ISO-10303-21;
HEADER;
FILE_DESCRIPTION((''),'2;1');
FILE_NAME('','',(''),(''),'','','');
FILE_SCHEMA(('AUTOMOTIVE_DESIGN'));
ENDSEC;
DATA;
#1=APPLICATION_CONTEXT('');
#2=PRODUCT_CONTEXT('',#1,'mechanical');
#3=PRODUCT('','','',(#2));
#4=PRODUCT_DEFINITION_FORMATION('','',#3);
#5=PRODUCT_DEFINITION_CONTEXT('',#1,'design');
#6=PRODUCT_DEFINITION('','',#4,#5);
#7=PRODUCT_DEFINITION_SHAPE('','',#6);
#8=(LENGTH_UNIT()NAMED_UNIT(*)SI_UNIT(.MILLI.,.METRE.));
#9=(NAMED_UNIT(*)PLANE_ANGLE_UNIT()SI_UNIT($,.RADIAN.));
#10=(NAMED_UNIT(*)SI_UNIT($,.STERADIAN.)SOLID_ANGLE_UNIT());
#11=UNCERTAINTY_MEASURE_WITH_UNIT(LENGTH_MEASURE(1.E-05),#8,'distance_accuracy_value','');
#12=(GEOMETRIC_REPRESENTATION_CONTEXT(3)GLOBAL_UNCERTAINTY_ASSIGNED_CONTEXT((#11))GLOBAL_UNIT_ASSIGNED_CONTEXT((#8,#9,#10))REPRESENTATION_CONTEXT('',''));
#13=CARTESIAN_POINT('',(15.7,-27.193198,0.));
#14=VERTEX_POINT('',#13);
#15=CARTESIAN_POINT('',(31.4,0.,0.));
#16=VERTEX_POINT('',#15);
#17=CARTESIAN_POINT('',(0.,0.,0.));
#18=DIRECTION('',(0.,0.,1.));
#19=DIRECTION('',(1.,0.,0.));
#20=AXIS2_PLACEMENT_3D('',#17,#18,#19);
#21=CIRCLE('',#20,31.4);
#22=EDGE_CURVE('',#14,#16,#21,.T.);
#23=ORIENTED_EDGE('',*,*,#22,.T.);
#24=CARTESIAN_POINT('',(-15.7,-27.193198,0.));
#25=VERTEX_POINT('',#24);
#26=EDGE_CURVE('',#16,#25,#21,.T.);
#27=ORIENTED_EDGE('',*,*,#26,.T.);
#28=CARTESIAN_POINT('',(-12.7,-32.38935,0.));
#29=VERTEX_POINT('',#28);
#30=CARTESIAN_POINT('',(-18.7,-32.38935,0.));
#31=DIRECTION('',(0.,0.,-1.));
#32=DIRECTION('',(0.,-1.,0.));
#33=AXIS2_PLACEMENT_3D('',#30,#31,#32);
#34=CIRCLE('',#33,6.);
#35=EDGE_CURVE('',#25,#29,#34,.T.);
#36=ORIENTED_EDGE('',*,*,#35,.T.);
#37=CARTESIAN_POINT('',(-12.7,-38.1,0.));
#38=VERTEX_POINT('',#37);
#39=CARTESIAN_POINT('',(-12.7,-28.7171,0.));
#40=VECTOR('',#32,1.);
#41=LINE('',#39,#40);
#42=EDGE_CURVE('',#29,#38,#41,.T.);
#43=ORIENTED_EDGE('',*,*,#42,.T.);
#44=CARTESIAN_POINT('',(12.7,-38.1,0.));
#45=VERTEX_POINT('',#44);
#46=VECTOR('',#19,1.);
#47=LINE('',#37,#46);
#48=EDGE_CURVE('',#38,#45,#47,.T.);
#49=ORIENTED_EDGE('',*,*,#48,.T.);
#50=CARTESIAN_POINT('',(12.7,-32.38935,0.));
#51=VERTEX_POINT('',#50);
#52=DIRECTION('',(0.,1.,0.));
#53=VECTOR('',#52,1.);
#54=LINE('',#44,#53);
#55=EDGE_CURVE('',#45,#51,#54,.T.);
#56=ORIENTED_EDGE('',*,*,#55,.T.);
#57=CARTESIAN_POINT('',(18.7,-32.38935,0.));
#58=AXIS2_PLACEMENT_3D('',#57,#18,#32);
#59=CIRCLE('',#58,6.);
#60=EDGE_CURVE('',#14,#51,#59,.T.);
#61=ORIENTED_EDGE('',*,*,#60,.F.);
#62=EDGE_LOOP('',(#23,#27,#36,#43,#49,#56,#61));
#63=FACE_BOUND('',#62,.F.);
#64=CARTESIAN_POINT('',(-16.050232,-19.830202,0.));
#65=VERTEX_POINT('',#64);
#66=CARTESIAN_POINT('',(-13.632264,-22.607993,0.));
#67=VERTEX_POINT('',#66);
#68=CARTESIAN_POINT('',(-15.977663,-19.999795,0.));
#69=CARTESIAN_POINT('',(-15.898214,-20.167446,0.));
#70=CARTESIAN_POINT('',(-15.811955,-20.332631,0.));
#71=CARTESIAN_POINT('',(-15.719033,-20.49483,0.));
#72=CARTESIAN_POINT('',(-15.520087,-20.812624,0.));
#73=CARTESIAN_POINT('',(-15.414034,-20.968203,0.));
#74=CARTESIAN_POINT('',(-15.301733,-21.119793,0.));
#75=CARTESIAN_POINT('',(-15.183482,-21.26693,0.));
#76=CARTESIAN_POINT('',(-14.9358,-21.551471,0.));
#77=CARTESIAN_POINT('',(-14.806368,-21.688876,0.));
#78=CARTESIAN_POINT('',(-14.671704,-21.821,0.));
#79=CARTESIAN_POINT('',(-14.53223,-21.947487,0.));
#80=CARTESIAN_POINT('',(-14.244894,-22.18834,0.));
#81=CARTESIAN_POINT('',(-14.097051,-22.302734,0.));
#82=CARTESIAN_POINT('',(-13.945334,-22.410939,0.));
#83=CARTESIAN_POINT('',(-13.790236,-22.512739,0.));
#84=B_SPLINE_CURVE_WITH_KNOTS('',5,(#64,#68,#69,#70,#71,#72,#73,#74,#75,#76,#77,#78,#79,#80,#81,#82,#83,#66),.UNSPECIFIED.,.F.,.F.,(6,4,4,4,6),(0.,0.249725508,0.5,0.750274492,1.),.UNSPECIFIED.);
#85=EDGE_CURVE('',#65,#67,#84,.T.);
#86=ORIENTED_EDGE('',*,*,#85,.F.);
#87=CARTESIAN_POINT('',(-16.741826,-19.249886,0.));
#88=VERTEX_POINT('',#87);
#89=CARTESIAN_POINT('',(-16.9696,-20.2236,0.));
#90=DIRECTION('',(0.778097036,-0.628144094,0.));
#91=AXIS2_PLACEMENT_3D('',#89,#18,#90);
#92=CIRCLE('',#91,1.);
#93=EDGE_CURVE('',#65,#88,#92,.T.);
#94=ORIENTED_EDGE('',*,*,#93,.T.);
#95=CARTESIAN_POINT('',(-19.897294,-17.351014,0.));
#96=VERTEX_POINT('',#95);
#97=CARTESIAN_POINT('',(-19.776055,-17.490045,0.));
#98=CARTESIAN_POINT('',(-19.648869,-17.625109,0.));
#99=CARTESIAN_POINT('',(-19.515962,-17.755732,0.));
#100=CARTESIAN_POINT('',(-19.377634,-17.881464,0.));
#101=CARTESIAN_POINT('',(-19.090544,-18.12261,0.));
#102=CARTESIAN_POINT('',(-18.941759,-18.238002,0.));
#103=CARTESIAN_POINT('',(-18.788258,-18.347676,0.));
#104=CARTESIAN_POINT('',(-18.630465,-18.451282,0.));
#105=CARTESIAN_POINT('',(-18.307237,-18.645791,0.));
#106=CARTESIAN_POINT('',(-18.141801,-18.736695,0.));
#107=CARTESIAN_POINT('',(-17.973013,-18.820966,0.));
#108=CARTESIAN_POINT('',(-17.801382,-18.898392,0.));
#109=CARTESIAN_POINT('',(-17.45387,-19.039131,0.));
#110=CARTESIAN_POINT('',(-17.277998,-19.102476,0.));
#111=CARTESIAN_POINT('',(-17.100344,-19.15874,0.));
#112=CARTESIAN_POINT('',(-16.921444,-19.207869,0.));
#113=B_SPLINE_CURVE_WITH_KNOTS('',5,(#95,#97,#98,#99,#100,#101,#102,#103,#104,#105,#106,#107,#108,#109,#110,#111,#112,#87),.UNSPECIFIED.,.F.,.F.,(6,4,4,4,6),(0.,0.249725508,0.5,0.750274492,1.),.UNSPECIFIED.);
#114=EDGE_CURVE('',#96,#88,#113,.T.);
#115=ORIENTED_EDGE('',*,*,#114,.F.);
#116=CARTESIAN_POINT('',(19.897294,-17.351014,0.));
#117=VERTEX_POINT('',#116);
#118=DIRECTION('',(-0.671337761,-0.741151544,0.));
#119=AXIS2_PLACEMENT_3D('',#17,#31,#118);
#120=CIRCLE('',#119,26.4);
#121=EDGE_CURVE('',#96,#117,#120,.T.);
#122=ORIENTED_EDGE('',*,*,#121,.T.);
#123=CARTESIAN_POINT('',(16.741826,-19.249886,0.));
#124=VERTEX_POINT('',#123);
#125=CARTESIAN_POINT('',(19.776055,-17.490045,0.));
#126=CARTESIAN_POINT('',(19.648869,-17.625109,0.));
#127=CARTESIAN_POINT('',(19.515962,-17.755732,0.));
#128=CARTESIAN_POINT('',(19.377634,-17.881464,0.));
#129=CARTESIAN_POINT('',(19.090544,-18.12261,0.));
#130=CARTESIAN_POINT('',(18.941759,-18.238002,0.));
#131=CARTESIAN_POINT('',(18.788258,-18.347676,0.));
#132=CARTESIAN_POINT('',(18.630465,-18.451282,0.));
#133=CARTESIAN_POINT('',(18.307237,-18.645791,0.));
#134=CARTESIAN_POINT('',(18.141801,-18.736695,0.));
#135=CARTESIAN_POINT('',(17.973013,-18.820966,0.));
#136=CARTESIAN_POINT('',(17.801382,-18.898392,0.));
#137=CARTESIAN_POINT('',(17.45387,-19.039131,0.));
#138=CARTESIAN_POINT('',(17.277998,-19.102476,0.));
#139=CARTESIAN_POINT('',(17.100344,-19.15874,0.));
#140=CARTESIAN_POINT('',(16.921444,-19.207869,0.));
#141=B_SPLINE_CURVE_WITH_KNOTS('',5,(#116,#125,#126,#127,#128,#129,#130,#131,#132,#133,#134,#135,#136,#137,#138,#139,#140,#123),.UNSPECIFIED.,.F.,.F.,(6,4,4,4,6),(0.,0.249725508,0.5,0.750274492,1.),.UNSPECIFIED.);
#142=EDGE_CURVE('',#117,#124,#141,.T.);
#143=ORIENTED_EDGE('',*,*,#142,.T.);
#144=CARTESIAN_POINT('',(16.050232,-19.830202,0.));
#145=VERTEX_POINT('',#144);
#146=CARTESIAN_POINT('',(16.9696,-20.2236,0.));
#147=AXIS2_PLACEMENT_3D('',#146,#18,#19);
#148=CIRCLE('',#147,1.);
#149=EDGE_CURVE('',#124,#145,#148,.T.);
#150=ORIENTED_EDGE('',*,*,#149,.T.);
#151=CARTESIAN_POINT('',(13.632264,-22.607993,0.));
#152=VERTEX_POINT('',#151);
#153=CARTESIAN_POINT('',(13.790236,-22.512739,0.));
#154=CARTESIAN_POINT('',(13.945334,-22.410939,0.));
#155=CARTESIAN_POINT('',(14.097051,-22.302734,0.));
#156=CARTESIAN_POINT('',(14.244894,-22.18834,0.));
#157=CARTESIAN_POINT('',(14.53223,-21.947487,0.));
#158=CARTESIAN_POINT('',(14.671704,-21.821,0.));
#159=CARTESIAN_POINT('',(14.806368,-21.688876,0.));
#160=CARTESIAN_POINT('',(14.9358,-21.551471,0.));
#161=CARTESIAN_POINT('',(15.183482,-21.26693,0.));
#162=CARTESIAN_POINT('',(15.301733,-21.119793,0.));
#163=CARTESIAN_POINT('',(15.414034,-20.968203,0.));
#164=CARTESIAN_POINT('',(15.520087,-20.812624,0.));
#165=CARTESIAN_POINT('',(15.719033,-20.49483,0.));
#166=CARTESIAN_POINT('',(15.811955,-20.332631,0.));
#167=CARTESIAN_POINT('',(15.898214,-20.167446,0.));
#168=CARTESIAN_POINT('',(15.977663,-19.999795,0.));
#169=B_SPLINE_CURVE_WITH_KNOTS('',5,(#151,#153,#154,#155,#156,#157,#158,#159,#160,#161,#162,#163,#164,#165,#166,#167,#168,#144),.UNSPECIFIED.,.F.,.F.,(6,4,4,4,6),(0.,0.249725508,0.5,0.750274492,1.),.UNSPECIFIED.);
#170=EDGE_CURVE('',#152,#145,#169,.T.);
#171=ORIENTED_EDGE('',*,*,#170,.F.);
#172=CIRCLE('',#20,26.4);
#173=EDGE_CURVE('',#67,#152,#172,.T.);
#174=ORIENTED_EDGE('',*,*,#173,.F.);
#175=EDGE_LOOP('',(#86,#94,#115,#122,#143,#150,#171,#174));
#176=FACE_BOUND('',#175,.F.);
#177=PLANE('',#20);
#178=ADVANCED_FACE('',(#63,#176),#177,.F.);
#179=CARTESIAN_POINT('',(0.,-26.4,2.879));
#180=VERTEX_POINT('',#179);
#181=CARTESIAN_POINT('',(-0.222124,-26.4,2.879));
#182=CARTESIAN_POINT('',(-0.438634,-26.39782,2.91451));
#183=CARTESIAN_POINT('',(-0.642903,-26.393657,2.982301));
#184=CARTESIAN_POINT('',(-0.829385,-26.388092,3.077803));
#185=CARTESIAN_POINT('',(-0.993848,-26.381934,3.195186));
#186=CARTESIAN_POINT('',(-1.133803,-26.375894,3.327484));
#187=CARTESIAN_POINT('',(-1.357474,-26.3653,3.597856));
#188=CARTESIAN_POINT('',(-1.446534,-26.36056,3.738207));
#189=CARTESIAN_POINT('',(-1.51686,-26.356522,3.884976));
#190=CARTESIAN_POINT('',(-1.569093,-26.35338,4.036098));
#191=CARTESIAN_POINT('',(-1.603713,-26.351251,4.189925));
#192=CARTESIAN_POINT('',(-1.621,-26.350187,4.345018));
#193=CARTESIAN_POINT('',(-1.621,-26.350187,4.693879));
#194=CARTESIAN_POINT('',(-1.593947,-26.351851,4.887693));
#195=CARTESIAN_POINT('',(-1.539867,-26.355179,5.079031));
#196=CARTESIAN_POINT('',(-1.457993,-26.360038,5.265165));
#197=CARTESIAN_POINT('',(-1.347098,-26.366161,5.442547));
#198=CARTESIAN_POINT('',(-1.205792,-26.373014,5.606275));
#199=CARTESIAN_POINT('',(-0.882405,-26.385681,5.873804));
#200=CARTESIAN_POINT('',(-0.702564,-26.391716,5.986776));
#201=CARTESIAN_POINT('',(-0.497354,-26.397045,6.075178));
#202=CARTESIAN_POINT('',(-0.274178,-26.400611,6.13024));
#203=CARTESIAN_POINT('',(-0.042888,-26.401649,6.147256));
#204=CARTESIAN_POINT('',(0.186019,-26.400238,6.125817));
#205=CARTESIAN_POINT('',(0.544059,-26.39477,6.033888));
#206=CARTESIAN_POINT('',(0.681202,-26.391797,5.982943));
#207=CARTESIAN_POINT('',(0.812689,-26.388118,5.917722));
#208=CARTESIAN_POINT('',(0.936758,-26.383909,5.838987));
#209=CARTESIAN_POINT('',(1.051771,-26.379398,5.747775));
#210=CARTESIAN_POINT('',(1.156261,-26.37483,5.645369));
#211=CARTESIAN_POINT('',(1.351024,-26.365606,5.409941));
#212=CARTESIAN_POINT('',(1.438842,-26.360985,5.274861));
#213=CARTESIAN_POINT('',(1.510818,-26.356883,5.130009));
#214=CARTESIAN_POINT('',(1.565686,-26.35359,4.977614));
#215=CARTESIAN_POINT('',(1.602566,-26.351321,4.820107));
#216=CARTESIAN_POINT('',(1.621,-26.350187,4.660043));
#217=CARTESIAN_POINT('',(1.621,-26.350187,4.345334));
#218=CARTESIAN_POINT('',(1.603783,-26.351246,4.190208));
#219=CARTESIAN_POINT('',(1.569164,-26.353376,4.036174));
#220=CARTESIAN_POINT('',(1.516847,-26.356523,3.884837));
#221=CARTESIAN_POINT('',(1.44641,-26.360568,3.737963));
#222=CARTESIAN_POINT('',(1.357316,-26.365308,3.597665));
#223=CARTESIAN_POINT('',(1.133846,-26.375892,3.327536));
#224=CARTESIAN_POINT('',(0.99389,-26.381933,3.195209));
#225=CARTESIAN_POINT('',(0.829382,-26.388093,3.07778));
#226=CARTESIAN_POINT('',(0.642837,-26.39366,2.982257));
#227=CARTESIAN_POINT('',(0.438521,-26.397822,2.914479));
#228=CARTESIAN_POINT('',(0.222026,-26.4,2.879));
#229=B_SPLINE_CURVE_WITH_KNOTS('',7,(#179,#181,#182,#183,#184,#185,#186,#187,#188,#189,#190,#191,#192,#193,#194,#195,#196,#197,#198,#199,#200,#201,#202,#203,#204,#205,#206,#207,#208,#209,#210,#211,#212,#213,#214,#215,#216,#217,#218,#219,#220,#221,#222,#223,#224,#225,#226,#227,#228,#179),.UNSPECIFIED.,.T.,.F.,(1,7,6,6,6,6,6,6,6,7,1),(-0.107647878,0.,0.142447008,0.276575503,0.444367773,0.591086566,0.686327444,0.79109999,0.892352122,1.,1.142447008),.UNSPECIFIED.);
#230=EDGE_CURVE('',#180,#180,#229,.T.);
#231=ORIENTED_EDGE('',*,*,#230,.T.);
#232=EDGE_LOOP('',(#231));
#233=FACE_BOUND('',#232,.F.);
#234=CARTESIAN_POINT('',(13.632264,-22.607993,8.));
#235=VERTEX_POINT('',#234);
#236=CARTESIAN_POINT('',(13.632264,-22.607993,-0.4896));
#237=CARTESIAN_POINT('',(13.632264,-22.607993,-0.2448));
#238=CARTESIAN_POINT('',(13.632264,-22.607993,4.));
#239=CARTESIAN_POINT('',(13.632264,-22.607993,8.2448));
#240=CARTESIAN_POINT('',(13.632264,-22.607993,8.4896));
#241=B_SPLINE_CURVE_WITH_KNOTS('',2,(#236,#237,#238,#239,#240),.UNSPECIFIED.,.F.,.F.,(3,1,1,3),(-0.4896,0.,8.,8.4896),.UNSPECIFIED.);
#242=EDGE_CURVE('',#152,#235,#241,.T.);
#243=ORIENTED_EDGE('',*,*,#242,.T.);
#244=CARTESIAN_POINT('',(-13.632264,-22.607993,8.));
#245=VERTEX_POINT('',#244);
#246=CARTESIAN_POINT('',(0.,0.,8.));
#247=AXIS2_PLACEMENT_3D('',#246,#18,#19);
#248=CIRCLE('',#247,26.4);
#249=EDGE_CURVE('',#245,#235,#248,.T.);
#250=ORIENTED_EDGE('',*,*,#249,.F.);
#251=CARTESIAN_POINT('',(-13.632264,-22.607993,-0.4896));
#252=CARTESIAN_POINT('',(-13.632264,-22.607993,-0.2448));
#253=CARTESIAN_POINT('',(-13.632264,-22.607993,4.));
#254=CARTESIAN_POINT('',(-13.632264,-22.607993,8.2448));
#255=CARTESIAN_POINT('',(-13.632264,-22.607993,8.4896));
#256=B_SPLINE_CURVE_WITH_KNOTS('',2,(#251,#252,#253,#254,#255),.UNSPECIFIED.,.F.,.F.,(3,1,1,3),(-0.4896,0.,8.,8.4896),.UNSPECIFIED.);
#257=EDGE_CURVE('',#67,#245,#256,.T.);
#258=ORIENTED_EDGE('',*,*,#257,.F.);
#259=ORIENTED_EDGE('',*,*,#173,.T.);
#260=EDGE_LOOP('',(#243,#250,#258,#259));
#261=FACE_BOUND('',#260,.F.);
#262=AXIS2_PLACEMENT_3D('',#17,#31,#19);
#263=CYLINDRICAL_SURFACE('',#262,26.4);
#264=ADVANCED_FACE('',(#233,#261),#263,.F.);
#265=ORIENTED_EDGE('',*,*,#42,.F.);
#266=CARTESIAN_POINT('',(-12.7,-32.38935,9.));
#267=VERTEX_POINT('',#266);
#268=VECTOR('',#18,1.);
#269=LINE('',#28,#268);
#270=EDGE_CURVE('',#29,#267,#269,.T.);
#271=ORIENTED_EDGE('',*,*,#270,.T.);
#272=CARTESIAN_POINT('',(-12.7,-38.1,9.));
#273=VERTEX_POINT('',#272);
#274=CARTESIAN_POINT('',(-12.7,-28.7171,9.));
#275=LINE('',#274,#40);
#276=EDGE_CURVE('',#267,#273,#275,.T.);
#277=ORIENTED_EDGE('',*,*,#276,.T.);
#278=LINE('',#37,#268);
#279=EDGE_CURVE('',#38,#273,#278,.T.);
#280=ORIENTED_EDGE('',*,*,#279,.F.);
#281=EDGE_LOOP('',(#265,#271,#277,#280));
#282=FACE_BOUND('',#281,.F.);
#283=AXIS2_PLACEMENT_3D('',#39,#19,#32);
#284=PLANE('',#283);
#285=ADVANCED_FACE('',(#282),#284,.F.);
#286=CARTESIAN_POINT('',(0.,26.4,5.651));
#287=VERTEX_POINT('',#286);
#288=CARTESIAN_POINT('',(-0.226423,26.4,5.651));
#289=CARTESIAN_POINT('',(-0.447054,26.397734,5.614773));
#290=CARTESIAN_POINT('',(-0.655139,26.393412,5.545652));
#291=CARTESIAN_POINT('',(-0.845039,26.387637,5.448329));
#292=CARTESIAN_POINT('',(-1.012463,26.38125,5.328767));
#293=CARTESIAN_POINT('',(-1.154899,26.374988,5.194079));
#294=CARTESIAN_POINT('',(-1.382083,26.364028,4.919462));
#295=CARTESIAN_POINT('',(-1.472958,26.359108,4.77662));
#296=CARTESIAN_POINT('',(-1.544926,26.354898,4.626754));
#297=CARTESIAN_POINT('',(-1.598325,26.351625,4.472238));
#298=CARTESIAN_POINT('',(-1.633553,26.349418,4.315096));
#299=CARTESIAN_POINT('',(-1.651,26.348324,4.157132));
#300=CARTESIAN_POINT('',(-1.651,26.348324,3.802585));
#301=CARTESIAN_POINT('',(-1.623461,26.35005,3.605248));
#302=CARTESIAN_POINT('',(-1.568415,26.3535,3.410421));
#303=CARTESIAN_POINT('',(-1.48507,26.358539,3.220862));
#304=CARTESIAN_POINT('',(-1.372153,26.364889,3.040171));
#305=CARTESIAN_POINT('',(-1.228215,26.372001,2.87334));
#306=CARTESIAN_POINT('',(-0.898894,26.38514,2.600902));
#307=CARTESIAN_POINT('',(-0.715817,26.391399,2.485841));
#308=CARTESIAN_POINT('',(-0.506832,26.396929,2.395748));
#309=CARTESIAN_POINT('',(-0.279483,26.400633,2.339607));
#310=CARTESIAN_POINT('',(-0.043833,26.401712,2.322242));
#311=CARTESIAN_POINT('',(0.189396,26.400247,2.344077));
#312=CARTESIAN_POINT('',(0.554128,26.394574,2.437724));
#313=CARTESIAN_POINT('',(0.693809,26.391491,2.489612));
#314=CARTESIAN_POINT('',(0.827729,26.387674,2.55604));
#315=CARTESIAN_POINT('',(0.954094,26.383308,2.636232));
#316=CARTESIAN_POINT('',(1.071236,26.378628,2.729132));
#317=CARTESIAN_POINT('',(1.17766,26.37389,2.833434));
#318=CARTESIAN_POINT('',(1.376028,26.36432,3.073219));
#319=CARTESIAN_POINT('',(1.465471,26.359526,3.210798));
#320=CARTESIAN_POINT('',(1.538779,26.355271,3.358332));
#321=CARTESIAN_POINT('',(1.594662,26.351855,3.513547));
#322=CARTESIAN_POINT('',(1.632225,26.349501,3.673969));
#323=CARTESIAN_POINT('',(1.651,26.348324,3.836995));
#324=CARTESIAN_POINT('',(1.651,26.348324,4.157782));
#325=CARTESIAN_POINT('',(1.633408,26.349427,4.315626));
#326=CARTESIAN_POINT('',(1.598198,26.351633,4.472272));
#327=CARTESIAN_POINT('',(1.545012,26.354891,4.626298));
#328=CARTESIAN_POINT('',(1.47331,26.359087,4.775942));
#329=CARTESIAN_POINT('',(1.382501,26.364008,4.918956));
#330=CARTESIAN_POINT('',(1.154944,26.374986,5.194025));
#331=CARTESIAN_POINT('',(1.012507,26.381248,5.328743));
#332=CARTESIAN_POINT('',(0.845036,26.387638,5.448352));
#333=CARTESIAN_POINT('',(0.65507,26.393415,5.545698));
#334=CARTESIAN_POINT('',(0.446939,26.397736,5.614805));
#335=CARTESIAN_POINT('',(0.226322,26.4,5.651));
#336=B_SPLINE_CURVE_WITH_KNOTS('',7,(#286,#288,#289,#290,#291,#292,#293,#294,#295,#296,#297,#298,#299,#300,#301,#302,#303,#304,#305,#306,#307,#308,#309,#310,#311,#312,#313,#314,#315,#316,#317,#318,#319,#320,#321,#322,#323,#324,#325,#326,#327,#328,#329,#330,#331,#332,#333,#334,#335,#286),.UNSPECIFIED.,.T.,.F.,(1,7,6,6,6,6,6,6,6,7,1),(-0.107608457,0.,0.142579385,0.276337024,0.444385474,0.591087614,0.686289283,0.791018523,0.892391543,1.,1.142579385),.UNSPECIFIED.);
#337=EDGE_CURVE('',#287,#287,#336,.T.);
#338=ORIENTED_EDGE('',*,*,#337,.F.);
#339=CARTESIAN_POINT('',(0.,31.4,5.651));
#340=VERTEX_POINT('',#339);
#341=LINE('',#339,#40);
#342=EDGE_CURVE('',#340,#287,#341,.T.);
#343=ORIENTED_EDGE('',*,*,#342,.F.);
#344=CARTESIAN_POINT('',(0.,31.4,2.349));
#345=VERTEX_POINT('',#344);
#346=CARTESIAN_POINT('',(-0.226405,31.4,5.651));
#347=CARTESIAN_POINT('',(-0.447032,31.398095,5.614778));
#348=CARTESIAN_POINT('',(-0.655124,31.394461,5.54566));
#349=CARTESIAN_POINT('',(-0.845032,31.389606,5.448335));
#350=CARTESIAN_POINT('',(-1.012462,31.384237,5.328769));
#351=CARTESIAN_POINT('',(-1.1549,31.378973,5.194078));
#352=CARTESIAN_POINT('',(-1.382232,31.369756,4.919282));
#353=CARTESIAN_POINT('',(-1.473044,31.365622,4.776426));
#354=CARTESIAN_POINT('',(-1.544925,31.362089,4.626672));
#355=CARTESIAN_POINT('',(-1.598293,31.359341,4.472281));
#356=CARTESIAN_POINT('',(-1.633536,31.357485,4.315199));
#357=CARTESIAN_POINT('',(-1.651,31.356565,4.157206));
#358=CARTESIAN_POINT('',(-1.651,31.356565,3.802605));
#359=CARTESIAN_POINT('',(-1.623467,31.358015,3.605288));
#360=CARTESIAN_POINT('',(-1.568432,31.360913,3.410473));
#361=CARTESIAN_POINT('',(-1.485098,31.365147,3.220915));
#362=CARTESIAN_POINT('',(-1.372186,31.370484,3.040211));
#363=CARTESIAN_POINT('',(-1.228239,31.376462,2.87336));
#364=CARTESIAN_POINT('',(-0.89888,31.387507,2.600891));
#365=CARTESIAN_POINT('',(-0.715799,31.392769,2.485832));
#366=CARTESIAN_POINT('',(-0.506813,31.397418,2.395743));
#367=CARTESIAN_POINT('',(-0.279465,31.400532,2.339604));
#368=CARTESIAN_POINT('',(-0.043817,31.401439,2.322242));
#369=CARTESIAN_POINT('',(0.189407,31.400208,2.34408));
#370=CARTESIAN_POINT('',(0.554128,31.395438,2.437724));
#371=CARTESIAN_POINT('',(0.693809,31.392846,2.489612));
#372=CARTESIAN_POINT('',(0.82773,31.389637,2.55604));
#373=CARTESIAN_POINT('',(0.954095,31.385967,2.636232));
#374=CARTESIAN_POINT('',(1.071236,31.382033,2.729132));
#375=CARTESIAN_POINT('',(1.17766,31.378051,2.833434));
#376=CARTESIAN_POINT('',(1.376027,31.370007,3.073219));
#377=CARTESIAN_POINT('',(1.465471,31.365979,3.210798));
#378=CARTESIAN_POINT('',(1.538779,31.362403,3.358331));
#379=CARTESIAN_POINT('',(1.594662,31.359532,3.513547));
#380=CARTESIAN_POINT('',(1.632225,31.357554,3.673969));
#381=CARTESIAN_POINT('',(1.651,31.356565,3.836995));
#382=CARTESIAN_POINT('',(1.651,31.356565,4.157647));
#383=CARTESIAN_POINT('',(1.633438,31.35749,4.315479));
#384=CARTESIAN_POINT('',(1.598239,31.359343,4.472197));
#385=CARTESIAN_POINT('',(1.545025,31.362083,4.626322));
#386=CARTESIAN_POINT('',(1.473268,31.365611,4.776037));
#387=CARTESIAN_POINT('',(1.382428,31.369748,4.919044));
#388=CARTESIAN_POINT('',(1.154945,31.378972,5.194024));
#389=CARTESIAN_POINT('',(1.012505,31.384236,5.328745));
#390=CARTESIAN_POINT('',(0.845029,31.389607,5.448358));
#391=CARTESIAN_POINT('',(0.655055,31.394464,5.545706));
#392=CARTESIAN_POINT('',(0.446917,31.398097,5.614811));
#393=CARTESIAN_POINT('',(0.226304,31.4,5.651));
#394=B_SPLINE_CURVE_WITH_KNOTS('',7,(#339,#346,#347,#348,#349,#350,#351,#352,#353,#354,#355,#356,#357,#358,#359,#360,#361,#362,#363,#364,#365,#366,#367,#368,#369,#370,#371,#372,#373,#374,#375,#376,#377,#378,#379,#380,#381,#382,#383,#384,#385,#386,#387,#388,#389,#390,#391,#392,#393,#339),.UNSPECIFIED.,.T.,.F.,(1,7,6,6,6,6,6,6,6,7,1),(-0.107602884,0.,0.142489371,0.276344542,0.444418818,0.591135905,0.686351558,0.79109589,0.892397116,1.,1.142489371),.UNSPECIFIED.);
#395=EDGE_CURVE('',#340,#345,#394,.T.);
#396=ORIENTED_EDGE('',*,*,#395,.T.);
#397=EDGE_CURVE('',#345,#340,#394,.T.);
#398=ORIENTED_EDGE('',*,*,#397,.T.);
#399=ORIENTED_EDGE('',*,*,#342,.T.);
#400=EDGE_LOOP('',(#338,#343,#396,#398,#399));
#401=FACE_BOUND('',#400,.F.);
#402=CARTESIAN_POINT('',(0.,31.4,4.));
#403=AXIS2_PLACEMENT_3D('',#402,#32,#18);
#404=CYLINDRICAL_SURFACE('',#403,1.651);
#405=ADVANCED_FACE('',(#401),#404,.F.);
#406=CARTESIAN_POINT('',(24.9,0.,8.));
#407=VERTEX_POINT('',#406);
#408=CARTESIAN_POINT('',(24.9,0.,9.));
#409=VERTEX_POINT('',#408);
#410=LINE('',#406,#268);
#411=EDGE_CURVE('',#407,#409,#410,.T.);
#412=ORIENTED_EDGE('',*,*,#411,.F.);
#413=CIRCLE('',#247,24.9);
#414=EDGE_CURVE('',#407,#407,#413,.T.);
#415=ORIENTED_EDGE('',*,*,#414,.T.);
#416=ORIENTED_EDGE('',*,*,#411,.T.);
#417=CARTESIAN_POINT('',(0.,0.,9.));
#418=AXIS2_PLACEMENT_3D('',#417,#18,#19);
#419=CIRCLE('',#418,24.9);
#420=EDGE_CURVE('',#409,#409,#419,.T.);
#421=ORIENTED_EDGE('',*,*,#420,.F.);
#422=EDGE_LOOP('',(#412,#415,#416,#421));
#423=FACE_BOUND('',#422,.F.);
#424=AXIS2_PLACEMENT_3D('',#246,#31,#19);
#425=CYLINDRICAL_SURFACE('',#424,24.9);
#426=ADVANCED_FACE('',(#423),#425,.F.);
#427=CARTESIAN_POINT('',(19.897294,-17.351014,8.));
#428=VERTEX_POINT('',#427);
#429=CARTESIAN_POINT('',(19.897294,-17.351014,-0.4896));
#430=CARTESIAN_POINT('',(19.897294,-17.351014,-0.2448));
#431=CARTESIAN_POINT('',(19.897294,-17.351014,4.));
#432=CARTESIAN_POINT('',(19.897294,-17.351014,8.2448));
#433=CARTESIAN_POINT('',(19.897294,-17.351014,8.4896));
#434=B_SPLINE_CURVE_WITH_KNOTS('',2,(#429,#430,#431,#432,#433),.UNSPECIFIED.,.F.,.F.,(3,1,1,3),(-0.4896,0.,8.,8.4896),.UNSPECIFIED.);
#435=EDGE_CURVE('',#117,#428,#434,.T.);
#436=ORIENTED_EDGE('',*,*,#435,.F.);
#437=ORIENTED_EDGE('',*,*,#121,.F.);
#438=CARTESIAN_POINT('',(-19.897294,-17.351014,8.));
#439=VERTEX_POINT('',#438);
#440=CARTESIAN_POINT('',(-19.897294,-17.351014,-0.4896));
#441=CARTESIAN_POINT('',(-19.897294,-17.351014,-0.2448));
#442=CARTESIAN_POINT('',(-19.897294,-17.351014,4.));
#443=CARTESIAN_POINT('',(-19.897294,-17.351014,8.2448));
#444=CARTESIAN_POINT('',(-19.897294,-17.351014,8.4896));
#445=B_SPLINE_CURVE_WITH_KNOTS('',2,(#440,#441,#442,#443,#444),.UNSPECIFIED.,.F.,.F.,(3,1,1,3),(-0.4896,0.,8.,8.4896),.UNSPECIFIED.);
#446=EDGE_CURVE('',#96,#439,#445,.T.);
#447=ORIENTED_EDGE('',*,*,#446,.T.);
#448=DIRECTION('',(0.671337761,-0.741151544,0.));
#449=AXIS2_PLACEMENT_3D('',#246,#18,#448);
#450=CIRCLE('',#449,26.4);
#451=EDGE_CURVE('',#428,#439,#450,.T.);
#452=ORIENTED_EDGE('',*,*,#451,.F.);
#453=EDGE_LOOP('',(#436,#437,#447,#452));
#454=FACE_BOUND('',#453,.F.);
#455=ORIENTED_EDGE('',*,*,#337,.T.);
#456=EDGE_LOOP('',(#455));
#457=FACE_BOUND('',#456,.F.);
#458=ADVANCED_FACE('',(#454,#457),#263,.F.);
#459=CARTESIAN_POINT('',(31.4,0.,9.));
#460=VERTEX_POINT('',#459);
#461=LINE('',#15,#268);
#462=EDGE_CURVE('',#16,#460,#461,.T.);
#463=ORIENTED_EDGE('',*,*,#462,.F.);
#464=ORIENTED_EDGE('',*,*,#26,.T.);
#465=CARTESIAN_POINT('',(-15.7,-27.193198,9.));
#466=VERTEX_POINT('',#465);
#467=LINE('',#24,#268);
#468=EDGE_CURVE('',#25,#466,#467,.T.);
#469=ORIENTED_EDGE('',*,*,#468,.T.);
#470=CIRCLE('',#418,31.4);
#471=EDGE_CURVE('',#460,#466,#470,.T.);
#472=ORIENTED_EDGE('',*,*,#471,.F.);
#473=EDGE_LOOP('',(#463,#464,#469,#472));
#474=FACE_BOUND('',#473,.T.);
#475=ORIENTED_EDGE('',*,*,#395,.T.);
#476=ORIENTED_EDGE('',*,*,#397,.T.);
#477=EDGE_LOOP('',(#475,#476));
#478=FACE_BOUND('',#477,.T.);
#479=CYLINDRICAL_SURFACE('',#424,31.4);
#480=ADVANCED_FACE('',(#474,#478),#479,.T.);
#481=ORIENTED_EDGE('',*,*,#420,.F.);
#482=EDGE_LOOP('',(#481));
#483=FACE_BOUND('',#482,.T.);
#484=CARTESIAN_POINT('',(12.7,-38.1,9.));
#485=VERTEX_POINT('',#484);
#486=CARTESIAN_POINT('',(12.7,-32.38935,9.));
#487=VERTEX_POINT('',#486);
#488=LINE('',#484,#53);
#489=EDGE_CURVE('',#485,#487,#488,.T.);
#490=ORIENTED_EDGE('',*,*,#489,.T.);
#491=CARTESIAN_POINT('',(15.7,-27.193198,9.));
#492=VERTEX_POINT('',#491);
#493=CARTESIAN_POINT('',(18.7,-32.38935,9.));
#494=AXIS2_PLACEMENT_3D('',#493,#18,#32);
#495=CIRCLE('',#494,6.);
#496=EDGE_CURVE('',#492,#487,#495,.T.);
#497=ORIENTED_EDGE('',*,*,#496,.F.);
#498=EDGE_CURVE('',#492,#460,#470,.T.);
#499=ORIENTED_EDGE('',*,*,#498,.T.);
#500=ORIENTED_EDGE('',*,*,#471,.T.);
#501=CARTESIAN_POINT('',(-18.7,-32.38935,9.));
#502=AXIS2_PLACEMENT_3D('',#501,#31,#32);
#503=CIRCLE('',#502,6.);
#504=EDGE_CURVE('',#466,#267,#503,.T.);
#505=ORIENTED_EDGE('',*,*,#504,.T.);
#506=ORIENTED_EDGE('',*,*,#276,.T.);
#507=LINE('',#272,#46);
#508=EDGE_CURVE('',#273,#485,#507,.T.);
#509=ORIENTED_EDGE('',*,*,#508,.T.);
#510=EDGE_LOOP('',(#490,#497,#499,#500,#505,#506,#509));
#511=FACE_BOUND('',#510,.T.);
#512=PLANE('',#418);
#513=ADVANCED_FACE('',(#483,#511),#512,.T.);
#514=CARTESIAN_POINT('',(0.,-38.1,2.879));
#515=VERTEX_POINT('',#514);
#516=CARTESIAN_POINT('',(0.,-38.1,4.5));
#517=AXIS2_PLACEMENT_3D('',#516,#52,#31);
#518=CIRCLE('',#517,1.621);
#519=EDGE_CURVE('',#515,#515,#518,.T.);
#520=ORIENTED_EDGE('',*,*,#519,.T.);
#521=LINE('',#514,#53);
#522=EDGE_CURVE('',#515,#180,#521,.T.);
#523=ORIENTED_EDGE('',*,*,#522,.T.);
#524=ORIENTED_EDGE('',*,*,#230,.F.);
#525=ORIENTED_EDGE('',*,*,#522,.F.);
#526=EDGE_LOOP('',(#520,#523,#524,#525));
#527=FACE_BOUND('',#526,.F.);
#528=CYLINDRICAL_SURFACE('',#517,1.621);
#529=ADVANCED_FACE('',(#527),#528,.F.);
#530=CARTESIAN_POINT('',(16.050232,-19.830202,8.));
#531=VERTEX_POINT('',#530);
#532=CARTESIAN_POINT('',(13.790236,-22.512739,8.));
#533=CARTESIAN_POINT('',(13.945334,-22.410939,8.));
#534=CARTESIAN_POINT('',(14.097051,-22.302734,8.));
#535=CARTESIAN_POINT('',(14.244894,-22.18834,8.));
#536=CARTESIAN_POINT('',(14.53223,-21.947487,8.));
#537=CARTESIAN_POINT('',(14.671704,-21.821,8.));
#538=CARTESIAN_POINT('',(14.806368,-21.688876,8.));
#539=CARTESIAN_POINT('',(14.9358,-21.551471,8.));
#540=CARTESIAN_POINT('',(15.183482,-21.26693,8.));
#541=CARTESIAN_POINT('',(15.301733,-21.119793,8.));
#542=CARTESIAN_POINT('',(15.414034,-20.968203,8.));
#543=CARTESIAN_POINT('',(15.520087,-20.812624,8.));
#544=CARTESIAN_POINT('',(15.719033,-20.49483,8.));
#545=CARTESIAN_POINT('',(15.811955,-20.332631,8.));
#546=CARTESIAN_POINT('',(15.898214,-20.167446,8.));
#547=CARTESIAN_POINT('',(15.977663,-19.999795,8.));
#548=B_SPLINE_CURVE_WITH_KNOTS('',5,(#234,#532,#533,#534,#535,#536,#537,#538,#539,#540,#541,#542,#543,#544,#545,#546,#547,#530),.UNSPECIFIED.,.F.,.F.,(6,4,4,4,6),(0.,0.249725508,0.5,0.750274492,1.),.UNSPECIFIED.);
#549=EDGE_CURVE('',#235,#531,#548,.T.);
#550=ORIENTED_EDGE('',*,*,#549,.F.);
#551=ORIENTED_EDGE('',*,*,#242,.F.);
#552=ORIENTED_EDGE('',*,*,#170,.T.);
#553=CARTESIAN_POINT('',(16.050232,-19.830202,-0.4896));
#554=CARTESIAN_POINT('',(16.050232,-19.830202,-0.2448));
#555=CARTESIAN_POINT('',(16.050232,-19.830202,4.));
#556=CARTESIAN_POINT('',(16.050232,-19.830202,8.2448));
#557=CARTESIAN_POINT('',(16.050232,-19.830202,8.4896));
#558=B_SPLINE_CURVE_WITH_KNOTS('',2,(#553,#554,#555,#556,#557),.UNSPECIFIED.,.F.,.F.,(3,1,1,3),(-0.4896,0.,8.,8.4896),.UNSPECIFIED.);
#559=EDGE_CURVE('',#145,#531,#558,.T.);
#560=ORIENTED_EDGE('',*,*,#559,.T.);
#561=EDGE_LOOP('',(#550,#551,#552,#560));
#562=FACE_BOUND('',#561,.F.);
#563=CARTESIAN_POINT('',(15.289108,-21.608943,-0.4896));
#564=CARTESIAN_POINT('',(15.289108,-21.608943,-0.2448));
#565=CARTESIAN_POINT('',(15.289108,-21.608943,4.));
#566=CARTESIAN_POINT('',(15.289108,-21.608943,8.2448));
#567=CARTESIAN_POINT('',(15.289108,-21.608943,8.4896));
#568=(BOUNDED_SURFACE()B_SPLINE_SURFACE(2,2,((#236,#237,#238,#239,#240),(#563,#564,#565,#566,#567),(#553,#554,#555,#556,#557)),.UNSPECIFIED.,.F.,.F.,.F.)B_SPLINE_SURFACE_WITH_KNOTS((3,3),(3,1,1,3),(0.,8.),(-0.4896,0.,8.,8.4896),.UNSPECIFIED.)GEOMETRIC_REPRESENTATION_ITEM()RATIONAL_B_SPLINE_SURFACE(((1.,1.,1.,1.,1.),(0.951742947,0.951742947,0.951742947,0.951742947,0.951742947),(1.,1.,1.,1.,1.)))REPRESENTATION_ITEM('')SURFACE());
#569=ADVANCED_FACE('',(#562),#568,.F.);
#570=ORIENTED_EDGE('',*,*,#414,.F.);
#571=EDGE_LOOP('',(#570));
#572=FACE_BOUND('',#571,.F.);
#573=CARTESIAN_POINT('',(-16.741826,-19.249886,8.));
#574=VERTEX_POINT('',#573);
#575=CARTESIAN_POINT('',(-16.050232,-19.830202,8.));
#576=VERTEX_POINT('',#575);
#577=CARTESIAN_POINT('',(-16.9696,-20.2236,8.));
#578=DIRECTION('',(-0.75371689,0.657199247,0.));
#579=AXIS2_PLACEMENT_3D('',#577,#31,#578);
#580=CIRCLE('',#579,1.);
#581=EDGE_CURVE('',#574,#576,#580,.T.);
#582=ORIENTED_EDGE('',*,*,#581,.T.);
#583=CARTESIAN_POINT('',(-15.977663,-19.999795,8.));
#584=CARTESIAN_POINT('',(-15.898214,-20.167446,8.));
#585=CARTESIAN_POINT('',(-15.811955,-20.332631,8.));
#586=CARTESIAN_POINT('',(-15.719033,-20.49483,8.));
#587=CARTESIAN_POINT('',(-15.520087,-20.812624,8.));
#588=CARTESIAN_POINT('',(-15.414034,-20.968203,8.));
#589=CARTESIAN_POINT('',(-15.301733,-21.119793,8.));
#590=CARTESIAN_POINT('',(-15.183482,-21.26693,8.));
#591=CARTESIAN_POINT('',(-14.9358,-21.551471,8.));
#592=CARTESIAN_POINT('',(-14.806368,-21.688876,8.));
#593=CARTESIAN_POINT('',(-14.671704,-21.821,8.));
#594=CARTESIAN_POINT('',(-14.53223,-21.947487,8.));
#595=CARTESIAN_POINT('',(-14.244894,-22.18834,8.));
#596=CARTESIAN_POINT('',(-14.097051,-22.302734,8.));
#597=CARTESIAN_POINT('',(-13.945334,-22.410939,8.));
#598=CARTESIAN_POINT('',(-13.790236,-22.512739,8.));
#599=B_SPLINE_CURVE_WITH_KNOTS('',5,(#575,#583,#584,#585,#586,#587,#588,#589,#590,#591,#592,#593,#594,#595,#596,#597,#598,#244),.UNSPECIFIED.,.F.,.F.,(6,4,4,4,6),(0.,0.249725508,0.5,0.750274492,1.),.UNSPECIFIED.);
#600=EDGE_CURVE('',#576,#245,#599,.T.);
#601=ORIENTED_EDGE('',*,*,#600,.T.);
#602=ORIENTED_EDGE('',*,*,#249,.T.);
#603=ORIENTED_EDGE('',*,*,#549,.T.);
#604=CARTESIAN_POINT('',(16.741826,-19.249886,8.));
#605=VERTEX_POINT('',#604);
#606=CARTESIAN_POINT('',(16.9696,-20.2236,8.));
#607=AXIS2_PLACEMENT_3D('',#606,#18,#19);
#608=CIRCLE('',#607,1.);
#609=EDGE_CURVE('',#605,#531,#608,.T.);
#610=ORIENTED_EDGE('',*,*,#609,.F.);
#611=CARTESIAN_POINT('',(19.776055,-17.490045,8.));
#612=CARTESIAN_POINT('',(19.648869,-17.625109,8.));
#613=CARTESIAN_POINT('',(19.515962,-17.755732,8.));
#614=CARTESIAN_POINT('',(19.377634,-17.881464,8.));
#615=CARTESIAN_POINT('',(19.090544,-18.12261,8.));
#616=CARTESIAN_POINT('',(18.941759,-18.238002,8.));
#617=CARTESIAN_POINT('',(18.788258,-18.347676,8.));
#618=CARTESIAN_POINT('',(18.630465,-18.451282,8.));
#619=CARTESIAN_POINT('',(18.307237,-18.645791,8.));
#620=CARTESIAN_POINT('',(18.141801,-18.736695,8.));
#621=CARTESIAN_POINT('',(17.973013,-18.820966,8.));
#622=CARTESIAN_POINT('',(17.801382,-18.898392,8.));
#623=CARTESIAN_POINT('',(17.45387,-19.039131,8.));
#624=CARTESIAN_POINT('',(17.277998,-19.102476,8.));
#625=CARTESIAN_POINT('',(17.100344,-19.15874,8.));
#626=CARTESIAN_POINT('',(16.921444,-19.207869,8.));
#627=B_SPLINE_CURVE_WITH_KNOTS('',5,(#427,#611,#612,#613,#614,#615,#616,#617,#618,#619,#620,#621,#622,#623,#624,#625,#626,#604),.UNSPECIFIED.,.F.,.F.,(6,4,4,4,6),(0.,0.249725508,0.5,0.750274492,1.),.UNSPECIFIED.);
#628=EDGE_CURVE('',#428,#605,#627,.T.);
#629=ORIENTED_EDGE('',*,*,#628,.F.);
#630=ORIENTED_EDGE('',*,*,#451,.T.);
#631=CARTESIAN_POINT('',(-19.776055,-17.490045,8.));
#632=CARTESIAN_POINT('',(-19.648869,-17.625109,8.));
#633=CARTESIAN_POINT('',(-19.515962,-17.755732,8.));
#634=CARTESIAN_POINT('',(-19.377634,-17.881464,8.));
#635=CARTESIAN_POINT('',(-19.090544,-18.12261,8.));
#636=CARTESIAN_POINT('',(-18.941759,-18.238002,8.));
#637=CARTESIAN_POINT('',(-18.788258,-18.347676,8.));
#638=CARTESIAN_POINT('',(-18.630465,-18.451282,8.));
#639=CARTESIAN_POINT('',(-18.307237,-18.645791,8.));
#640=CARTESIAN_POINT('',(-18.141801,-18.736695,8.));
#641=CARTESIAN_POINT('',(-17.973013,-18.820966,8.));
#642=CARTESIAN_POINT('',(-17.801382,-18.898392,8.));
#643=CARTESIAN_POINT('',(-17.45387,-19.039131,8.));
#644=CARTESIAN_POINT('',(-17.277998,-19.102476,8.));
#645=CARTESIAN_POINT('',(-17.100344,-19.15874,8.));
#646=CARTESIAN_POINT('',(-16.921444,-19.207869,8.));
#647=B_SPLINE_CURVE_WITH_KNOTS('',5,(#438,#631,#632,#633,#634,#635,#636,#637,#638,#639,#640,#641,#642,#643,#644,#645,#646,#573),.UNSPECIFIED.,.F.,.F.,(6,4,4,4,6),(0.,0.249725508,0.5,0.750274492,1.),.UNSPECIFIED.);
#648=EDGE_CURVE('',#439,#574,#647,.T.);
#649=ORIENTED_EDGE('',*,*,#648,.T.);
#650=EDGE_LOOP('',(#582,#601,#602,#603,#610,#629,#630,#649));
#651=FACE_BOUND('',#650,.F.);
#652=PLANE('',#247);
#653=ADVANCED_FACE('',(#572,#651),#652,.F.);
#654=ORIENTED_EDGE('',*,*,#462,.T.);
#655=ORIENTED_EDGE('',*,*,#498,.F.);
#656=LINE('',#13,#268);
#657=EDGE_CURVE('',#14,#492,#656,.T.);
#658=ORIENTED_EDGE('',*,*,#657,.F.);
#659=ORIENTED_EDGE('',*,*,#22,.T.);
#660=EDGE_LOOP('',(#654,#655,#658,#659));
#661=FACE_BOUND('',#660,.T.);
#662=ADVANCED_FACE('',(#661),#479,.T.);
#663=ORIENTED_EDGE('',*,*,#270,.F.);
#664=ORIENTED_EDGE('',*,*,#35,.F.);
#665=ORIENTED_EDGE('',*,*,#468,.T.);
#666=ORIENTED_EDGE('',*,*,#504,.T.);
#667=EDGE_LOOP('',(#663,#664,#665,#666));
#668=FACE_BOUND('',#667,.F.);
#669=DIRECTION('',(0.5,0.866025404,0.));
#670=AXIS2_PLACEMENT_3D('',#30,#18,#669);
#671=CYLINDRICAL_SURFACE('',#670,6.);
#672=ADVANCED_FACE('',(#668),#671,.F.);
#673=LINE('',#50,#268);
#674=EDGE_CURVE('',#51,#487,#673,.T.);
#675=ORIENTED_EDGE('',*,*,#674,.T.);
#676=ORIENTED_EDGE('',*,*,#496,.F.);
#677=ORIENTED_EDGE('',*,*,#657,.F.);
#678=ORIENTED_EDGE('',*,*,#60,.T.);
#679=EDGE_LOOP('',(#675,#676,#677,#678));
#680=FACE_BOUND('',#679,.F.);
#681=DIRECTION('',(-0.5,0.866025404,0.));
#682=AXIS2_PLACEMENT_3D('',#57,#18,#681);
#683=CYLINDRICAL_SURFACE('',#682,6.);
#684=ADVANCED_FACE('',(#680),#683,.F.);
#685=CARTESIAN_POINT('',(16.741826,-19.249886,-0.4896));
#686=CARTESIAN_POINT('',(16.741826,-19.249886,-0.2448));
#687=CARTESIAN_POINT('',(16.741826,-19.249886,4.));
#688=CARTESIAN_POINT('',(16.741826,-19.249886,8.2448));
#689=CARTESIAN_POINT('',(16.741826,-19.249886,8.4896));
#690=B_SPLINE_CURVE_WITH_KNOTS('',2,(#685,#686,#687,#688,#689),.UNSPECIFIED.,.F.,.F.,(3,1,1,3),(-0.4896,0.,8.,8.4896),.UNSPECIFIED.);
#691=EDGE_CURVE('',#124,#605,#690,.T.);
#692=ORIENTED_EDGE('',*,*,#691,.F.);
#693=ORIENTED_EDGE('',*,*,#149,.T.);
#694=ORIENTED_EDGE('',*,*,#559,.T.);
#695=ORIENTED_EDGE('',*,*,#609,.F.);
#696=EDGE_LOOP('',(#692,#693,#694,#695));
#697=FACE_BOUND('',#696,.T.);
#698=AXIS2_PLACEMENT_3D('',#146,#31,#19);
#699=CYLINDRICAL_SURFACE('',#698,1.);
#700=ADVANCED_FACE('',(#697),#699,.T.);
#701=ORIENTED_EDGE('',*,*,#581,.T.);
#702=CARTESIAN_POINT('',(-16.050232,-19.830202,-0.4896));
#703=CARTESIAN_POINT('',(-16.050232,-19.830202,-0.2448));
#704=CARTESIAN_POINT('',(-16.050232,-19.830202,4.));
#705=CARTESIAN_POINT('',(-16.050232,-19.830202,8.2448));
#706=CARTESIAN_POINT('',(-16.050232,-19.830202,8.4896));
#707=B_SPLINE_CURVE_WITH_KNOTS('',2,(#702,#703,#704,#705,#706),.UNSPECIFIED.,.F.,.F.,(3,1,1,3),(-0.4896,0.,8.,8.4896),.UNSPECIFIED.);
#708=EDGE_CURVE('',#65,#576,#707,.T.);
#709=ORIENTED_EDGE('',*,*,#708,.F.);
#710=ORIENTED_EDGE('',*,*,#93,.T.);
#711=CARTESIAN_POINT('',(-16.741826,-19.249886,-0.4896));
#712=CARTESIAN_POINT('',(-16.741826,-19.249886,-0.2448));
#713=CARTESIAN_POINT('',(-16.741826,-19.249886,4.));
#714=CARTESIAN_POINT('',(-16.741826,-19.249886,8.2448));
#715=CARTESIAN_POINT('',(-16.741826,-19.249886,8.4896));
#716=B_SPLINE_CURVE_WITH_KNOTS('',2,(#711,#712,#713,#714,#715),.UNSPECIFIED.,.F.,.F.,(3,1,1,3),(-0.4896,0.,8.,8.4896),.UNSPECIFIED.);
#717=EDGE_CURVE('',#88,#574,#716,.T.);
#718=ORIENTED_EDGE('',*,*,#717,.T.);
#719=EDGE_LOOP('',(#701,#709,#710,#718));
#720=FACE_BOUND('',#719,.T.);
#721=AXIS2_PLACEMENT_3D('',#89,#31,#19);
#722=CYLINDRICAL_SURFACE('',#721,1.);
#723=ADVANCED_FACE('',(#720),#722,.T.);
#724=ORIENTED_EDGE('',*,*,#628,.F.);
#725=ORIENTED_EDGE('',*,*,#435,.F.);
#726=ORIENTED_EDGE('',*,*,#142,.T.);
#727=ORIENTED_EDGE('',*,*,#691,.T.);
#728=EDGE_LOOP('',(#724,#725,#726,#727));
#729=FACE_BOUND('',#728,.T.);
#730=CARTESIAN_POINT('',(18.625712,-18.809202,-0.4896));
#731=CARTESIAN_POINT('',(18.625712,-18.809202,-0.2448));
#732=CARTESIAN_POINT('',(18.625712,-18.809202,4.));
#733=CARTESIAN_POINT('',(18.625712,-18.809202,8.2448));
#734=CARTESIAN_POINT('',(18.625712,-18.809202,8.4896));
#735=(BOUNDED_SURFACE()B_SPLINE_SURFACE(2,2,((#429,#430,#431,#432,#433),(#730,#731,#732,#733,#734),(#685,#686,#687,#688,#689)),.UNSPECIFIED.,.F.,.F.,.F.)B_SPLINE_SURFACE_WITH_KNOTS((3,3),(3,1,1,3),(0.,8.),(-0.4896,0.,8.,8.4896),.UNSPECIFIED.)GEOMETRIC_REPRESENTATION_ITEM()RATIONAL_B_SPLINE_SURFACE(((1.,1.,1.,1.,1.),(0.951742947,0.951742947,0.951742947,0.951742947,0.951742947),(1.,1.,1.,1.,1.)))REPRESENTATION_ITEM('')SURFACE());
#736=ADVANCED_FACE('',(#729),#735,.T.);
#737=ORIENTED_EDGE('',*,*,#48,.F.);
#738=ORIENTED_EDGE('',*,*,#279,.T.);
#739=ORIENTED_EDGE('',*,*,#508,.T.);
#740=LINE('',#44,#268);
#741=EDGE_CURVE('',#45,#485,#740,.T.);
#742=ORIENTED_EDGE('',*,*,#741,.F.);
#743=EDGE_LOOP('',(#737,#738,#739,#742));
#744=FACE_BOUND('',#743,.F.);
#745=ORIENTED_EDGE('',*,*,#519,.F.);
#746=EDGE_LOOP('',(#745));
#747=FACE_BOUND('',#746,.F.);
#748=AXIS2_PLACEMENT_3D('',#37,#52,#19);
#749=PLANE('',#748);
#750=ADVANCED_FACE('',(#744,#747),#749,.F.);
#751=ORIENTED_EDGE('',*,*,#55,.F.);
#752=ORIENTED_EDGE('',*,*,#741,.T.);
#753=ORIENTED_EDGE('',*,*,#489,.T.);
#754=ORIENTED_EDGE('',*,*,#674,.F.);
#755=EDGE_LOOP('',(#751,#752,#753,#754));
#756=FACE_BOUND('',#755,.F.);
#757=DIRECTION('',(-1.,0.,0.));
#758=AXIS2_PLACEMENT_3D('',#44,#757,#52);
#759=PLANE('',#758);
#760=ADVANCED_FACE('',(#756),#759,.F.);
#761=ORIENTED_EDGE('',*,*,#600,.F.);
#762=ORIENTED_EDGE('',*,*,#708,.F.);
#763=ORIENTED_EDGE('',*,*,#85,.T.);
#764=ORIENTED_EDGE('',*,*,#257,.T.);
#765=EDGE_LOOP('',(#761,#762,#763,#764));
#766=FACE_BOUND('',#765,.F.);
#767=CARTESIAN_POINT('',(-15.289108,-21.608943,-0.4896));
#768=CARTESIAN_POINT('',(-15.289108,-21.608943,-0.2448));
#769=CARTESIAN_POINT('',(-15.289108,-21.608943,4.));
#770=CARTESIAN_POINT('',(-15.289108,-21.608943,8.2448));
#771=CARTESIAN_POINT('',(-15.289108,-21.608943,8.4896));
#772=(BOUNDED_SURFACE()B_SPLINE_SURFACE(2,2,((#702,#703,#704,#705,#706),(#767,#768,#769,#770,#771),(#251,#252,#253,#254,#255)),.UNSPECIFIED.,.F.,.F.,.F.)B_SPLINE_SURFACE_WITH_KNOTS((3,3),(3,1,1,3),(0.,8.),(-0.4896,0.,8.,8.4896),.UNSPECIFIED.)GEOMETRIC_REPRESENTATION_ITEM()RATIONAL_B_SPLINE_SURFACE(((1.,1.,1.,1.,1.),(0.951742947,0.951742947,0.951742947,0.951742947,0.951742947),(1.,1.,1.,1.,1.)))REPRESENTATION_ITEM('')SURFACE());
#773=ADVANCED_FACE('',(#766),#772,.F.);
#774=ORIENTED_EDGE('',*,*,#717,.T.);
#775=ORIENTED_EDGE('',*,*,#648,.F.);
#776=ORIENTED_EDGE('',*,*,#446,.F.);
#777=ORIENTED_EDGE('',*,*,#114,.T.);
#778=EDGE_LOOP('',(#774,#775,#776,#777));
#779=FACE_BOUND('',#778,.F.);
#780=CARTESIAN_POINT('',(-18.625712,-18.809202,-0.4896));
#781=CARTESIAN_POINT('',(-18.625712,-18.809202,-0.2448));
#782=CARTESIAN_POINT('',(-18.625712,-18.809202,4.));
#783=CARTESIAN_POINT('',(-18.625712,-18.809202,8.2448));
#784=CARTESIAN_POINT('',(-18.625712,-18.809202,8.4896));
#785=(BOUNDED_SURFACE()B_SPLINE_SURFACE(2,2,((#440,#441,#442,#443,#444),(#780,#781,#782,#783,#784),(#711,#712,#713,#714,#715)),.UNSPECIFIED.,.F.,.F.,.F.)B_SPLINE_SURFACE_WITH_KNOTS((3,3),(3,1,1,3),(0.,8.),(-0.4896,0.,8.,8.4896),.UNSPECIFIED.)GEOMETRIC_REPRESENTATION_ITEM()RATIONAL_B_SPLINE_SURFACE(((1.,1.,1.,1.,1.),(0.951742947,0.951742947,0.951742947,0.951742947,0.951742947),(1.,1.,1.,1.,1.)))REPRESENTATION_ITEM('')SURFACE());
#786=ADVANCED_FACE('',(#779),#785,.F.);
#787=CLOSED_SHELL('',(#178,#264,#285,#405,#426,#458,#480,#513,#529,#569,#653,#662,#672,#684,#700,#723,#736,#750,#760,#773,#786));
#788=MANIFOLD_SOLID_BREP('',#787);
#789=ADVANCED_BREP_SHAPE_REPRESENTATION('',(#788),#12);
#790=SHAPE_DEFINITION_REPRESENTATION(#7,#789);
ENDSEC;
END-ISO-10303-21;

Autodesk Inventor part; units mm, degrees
ref_plane "YZ Plane" through (0, 0, 0) normal (1, 0, 0) x (0, 1, 0)
ref_plane "XY Plane" through (0, 0, 0) normal (0, 0, 1) x (1, 0, 0)
sketch "Sketch1" plane through (0, 0, 0) normal (0, 0, 1) x (1, 0, 0)
  circle A0 centre (0, 0) radius 25.4 construction
  circle A1 centre (0, 0) radius 26.4
  circle A2 centre (0, 0) radius 31.4
  line L0 (0, 0) -> (37.8275, -45.0811) construction
  line L1 (0, 0) -> (58.8492, 0) construction
  circle A3 centre (16.9696, -20.2236) radius 1
  line L2 (0, 0) -> (0, -31.4) construction
  circle A4 centre (-16.9696, -20.2236) radius 1
  dimension "d1" = 52.8
  dimension "d2" = 62.8
  dimension "d0" = 50.8
  dimension "d4" = 50
extrude "Extrusion1" add sketch "Sketch1" along normal blind 8 contours A4 A1 | A1 A4 | A3 A1 | A1 A3 | A2
fillet "Fillet1" radius 6 2 edges at (17.7233, -19.5664, 4) (16.1915, -20.8517, 4)
fillet_without_effect "Fillet2"
fillet "Fillet3" radius 6 2 edges at (-17.7233, -19.5664, 4) (-16.1915, -20.8517, 4)
fillet_without_effect "Fillet4"
sketch "Sketch2" plane through (0, 0, 8) normal (0, 0, 1) x (1, 0, 0)
  circle A0 centre (0, 0) radius 31.4 projected
  arc A1 (19.8973, -17.351) -> (-19.8973, -17.351) centre (0, 0) ccw projected
  circle A2 centre (0, 0) radius 24.9
  circle A3 centre (0, 0) radius 31.4
  dimension "d11" = 49.8
extrude "Extrusion2" add sketch "Sketch2" along normal blind 1
ref_plane "Work Plane1" through (0, 31.4, 0) normal (0, 1, 0) x (-1, 0, 0)
sketch "Sketch3" plane through (0, 31.4, 0) normal (0, 1, 0) x (-1, 0, 0)
  line L0 (-31.4, 0) -> (31.4, 0) projected
  point P0 (0, 0)
  point P1 (0, 4)
  dimension "d14" = 4
hole "Hole1" at (0, 31.4, 4) direction (0, -1, 0) diameter 3.302 depth 12.3 tip angle 118 thread size "8-32 UNC" class "2B" standard "ANSI Unified Screw Threads"
sketch "Sketch4" plane through (0, 0, 0) normal (0, 0, -1) x (-1, 0, 0)
  circle A0 centre (0, 0) radius 31.4 projected
  arc A1 (-13.6322, -22.608) -> (13.6322, -22.608) centre (0, 0) ccw projected
  line L0 (-44.084, -38.1) -> (62.353, -38.1) construction
  line L1 (-12.7, -28.7171) -> (12.7, -28.7171)
  line L2 (12.7, -28.7171) -> (12.7, -38.1)
  line L3 (12.7, -38.1) -> (-12.7, -38.1)
  line L4 (-12.7, -38.1) -> (-12.7, -28.7171)
  line L5 (-12.7, -28.7171) -> (12.7, -38.1) construction
  line L6 (12.7, -28.7171) -> (-12.7, -38.1) construction
  line L7 (0, 0) -> (0, -74.2634) construction
  point P0 (0, -33.4085)
  point P1 (0, -33.4085)
  dimension "d22" = 38.1
  dimension "d23" = 25.4
extrude "Extrusion3" add sketch "Sketch4" against normal blind 9 contours L1 A0 | A0 L2 L3 L4 picked at (-2.1634, -29.3854)
fillet "Fillet5" radius 6 1 edges at (12.7, -28.7171, 4.5)
fillet "Fillet6" radius 6 1 edges at (-12.7, -28.7171, 4.5)
sketch "Sketch5" plane through (-12.7, -38.1, 0) normal (0, -1, 0) x (1, 0, 0)
  line L0 (0, 9) -> (25.4, 9) projected
  line L1 (0, 0) -> (0, 9) projected
  line L2 (12.7, 0) -> (12.7, 9) construction
  line L3 (25.4, 9) -> (25.4, 0) construction
  line L4 (25.4, 4.5) -> (0, 4.5) construction
  point P0 (12.7, 4.5)
hole "Hole2" at (0, -38.1, 4.5) direction (0, 1, 0) diameter 3.242 depth 13 tip angle 118 thread size "M4x0.7" class "6H" standard "ANSI Metric M Profile"
equation "\"d14\" = 0.5 * d5"
equation "\"d5\" = 8"
properties part number "BSholder"
